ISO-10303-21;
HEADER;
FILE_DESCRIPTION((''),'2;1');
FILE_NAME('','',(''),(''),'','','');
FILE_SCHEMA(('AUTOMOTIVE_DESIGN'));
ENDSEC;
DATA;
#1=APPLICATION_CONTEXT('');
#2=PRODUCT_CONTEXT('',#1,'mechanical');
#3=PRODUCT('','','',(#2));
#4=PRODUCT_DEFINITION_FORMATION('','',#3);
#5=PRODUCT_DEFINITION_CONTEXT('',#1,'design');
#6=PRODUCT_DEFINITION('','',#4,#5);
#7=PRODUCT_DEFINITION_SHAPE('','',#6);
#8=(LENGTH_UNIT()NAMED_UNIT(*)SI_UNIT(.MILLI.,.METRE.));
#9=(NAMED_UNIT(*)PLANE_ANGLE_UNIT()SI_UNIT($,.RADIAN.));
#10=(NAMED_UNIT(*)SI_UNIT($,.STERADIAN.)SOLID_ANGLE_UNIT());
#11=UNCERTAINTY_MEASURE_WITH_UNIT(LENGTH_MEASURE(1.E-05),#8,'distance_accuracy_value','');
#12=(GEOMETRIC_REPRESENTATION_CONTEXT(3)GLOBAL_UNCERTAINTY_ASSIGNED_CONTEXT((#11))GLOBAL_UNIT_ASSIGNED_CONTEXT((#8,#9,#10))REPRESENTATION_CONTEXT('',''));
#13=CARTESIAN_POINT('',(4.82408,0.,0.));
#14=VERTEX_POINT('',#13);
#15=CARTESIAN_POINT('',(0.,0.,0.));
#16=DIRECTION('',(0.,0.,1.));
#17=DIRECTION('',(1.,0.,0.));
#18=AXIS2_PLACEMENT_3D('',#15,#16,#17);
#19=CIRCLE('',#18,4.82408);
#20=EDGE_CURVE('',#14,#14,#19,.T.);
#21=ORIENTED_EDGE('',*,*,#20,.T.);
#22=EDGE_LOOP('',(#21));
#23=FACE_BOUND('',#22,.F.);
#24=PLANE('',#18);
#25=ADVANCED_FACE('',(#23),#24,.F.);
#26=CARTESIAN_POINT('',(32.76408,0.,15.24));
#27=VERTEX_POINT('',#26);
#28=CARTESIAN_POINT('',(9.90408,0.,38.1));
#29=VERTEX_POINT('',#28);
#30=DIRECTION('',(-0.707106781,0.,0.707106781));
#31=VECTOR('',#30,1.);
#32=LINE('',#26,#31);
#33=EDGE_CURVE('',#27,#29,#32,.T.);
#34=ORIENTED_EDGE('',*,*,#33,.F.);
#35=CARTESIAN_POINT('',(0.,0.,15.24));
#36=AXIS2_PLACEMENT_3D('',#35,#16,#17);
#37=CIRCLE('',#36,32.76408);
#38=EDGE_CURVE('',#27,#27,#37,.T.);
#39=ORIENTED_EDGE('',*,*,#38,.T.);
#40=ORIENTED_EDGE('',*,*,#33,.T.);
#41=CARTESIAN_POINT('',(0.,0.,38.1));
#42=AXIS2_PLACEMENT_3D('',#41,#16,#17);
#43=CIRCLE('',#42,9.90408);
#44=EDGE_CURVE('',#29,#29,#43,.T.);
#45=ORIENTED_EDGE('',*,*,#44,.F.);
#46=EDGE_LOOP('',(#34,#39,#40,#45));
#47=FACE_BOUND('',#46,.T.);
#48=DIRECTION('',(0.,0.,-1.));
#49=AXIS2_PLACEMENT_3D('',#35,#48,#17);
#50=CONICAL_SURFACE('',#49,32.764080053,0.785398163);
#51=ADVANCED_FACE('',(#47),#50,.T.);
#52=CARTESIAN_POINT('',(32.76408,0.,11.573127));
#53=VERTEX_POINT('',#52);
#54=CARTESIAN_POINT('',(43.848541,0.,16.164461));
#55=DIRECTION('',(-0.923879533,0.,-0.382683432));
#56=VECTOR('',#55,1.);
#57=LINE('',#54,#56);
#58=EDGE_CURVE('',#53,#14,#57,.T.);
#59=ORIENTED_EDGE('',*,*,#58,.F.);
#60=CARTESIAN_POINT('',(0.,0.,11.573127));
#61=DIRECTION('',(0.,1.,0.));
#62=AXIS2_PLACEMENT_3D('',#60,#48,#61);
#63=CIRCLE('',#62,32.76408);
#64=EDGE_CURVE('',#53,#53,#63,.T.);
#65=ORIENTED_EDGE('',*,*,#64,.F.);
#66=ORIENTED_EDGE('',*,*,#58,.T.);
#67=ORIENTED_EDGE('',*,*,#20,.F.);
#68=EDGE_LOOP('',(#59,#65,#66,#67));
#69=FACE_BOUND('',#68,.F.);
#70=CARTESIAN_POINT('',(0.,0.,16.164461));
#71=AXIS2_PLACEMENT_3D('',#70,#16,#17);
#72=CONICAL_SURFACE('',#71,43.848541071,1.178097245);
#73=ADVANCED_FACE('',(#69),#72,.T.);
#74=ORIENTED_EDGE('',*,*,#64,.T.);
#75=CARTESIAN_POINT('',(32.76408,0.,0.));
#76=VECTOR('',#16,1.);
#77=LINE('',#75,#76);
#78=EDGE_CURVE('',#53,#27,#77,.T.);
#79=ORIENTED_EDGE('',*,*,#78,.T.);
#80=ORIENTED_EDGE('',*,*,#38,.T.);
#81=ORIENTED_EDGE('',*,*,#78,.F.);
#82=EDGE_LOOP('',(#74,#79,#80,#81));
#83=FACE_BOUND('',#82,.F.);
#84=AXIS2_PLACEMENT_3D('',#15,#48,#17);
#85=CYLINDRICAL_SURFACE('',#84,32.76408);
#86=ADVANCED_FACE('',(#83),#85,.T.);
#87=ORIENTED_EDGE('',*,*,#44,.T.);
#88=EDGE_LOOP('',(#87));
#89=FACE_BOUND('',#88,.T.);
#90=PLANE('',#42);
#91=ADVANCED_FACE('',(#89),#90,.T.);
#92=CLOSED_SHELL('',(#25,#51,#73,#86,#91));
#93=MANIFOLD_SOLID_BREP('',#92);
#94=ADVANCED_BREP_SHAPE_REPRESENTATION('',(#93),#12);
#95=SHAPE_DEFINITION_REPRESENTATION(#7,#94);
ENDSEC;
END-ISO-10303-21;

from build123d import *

# Parameters (mm, degrees)
F0_R     = 32.7640800534
F1_DEPTH = 38.1
F2_SIZE  = 22.86
F3_SIZE  = 5.08


# Not quite as in the source:
# - a fillet or chamfer that OpenCascade refuses, or shapes differently, is made with other operations: its cross-section is extruded or revolved along the edge and cut away or added


with BuildPart() as f1:
    # F0 (on Top) → F1 (new body)
    with BuildSketch(Plane.XY):
        Circle(F0_R)
    extrude(amount=F1_DEPTH)

    # F2
    f2_edges = [f1.edges().sort_by_distance(p)[0] for p in [
        (-32.76408, 0, 38.1),
    ]]
    chamfer(f2_edges, length=F2_SIZE)

    # F3
    f3_edges = [f1.edges().sort_by_distance(p)[0] for p in [
        (-32.76408, 0, 0),
    ]]
    chamfer(f3_edges, length=F3_SIZE)

    # F4: chamfer of 22.86 on 1 edges, made by hand

    # F4_s1 → F4_t2 (revolve, cut)
    with BuildSketch(Plane.XZ):
        Polygon((43.8485410713, 16.1644610179), (4.8240800534, 0), (27.6840800534, 0), align=None)
    revolve(axis=Axis((0, 0, 0), (0, 0, 1)), mode=Mode.SUBTRACT)


solid = f1.part
